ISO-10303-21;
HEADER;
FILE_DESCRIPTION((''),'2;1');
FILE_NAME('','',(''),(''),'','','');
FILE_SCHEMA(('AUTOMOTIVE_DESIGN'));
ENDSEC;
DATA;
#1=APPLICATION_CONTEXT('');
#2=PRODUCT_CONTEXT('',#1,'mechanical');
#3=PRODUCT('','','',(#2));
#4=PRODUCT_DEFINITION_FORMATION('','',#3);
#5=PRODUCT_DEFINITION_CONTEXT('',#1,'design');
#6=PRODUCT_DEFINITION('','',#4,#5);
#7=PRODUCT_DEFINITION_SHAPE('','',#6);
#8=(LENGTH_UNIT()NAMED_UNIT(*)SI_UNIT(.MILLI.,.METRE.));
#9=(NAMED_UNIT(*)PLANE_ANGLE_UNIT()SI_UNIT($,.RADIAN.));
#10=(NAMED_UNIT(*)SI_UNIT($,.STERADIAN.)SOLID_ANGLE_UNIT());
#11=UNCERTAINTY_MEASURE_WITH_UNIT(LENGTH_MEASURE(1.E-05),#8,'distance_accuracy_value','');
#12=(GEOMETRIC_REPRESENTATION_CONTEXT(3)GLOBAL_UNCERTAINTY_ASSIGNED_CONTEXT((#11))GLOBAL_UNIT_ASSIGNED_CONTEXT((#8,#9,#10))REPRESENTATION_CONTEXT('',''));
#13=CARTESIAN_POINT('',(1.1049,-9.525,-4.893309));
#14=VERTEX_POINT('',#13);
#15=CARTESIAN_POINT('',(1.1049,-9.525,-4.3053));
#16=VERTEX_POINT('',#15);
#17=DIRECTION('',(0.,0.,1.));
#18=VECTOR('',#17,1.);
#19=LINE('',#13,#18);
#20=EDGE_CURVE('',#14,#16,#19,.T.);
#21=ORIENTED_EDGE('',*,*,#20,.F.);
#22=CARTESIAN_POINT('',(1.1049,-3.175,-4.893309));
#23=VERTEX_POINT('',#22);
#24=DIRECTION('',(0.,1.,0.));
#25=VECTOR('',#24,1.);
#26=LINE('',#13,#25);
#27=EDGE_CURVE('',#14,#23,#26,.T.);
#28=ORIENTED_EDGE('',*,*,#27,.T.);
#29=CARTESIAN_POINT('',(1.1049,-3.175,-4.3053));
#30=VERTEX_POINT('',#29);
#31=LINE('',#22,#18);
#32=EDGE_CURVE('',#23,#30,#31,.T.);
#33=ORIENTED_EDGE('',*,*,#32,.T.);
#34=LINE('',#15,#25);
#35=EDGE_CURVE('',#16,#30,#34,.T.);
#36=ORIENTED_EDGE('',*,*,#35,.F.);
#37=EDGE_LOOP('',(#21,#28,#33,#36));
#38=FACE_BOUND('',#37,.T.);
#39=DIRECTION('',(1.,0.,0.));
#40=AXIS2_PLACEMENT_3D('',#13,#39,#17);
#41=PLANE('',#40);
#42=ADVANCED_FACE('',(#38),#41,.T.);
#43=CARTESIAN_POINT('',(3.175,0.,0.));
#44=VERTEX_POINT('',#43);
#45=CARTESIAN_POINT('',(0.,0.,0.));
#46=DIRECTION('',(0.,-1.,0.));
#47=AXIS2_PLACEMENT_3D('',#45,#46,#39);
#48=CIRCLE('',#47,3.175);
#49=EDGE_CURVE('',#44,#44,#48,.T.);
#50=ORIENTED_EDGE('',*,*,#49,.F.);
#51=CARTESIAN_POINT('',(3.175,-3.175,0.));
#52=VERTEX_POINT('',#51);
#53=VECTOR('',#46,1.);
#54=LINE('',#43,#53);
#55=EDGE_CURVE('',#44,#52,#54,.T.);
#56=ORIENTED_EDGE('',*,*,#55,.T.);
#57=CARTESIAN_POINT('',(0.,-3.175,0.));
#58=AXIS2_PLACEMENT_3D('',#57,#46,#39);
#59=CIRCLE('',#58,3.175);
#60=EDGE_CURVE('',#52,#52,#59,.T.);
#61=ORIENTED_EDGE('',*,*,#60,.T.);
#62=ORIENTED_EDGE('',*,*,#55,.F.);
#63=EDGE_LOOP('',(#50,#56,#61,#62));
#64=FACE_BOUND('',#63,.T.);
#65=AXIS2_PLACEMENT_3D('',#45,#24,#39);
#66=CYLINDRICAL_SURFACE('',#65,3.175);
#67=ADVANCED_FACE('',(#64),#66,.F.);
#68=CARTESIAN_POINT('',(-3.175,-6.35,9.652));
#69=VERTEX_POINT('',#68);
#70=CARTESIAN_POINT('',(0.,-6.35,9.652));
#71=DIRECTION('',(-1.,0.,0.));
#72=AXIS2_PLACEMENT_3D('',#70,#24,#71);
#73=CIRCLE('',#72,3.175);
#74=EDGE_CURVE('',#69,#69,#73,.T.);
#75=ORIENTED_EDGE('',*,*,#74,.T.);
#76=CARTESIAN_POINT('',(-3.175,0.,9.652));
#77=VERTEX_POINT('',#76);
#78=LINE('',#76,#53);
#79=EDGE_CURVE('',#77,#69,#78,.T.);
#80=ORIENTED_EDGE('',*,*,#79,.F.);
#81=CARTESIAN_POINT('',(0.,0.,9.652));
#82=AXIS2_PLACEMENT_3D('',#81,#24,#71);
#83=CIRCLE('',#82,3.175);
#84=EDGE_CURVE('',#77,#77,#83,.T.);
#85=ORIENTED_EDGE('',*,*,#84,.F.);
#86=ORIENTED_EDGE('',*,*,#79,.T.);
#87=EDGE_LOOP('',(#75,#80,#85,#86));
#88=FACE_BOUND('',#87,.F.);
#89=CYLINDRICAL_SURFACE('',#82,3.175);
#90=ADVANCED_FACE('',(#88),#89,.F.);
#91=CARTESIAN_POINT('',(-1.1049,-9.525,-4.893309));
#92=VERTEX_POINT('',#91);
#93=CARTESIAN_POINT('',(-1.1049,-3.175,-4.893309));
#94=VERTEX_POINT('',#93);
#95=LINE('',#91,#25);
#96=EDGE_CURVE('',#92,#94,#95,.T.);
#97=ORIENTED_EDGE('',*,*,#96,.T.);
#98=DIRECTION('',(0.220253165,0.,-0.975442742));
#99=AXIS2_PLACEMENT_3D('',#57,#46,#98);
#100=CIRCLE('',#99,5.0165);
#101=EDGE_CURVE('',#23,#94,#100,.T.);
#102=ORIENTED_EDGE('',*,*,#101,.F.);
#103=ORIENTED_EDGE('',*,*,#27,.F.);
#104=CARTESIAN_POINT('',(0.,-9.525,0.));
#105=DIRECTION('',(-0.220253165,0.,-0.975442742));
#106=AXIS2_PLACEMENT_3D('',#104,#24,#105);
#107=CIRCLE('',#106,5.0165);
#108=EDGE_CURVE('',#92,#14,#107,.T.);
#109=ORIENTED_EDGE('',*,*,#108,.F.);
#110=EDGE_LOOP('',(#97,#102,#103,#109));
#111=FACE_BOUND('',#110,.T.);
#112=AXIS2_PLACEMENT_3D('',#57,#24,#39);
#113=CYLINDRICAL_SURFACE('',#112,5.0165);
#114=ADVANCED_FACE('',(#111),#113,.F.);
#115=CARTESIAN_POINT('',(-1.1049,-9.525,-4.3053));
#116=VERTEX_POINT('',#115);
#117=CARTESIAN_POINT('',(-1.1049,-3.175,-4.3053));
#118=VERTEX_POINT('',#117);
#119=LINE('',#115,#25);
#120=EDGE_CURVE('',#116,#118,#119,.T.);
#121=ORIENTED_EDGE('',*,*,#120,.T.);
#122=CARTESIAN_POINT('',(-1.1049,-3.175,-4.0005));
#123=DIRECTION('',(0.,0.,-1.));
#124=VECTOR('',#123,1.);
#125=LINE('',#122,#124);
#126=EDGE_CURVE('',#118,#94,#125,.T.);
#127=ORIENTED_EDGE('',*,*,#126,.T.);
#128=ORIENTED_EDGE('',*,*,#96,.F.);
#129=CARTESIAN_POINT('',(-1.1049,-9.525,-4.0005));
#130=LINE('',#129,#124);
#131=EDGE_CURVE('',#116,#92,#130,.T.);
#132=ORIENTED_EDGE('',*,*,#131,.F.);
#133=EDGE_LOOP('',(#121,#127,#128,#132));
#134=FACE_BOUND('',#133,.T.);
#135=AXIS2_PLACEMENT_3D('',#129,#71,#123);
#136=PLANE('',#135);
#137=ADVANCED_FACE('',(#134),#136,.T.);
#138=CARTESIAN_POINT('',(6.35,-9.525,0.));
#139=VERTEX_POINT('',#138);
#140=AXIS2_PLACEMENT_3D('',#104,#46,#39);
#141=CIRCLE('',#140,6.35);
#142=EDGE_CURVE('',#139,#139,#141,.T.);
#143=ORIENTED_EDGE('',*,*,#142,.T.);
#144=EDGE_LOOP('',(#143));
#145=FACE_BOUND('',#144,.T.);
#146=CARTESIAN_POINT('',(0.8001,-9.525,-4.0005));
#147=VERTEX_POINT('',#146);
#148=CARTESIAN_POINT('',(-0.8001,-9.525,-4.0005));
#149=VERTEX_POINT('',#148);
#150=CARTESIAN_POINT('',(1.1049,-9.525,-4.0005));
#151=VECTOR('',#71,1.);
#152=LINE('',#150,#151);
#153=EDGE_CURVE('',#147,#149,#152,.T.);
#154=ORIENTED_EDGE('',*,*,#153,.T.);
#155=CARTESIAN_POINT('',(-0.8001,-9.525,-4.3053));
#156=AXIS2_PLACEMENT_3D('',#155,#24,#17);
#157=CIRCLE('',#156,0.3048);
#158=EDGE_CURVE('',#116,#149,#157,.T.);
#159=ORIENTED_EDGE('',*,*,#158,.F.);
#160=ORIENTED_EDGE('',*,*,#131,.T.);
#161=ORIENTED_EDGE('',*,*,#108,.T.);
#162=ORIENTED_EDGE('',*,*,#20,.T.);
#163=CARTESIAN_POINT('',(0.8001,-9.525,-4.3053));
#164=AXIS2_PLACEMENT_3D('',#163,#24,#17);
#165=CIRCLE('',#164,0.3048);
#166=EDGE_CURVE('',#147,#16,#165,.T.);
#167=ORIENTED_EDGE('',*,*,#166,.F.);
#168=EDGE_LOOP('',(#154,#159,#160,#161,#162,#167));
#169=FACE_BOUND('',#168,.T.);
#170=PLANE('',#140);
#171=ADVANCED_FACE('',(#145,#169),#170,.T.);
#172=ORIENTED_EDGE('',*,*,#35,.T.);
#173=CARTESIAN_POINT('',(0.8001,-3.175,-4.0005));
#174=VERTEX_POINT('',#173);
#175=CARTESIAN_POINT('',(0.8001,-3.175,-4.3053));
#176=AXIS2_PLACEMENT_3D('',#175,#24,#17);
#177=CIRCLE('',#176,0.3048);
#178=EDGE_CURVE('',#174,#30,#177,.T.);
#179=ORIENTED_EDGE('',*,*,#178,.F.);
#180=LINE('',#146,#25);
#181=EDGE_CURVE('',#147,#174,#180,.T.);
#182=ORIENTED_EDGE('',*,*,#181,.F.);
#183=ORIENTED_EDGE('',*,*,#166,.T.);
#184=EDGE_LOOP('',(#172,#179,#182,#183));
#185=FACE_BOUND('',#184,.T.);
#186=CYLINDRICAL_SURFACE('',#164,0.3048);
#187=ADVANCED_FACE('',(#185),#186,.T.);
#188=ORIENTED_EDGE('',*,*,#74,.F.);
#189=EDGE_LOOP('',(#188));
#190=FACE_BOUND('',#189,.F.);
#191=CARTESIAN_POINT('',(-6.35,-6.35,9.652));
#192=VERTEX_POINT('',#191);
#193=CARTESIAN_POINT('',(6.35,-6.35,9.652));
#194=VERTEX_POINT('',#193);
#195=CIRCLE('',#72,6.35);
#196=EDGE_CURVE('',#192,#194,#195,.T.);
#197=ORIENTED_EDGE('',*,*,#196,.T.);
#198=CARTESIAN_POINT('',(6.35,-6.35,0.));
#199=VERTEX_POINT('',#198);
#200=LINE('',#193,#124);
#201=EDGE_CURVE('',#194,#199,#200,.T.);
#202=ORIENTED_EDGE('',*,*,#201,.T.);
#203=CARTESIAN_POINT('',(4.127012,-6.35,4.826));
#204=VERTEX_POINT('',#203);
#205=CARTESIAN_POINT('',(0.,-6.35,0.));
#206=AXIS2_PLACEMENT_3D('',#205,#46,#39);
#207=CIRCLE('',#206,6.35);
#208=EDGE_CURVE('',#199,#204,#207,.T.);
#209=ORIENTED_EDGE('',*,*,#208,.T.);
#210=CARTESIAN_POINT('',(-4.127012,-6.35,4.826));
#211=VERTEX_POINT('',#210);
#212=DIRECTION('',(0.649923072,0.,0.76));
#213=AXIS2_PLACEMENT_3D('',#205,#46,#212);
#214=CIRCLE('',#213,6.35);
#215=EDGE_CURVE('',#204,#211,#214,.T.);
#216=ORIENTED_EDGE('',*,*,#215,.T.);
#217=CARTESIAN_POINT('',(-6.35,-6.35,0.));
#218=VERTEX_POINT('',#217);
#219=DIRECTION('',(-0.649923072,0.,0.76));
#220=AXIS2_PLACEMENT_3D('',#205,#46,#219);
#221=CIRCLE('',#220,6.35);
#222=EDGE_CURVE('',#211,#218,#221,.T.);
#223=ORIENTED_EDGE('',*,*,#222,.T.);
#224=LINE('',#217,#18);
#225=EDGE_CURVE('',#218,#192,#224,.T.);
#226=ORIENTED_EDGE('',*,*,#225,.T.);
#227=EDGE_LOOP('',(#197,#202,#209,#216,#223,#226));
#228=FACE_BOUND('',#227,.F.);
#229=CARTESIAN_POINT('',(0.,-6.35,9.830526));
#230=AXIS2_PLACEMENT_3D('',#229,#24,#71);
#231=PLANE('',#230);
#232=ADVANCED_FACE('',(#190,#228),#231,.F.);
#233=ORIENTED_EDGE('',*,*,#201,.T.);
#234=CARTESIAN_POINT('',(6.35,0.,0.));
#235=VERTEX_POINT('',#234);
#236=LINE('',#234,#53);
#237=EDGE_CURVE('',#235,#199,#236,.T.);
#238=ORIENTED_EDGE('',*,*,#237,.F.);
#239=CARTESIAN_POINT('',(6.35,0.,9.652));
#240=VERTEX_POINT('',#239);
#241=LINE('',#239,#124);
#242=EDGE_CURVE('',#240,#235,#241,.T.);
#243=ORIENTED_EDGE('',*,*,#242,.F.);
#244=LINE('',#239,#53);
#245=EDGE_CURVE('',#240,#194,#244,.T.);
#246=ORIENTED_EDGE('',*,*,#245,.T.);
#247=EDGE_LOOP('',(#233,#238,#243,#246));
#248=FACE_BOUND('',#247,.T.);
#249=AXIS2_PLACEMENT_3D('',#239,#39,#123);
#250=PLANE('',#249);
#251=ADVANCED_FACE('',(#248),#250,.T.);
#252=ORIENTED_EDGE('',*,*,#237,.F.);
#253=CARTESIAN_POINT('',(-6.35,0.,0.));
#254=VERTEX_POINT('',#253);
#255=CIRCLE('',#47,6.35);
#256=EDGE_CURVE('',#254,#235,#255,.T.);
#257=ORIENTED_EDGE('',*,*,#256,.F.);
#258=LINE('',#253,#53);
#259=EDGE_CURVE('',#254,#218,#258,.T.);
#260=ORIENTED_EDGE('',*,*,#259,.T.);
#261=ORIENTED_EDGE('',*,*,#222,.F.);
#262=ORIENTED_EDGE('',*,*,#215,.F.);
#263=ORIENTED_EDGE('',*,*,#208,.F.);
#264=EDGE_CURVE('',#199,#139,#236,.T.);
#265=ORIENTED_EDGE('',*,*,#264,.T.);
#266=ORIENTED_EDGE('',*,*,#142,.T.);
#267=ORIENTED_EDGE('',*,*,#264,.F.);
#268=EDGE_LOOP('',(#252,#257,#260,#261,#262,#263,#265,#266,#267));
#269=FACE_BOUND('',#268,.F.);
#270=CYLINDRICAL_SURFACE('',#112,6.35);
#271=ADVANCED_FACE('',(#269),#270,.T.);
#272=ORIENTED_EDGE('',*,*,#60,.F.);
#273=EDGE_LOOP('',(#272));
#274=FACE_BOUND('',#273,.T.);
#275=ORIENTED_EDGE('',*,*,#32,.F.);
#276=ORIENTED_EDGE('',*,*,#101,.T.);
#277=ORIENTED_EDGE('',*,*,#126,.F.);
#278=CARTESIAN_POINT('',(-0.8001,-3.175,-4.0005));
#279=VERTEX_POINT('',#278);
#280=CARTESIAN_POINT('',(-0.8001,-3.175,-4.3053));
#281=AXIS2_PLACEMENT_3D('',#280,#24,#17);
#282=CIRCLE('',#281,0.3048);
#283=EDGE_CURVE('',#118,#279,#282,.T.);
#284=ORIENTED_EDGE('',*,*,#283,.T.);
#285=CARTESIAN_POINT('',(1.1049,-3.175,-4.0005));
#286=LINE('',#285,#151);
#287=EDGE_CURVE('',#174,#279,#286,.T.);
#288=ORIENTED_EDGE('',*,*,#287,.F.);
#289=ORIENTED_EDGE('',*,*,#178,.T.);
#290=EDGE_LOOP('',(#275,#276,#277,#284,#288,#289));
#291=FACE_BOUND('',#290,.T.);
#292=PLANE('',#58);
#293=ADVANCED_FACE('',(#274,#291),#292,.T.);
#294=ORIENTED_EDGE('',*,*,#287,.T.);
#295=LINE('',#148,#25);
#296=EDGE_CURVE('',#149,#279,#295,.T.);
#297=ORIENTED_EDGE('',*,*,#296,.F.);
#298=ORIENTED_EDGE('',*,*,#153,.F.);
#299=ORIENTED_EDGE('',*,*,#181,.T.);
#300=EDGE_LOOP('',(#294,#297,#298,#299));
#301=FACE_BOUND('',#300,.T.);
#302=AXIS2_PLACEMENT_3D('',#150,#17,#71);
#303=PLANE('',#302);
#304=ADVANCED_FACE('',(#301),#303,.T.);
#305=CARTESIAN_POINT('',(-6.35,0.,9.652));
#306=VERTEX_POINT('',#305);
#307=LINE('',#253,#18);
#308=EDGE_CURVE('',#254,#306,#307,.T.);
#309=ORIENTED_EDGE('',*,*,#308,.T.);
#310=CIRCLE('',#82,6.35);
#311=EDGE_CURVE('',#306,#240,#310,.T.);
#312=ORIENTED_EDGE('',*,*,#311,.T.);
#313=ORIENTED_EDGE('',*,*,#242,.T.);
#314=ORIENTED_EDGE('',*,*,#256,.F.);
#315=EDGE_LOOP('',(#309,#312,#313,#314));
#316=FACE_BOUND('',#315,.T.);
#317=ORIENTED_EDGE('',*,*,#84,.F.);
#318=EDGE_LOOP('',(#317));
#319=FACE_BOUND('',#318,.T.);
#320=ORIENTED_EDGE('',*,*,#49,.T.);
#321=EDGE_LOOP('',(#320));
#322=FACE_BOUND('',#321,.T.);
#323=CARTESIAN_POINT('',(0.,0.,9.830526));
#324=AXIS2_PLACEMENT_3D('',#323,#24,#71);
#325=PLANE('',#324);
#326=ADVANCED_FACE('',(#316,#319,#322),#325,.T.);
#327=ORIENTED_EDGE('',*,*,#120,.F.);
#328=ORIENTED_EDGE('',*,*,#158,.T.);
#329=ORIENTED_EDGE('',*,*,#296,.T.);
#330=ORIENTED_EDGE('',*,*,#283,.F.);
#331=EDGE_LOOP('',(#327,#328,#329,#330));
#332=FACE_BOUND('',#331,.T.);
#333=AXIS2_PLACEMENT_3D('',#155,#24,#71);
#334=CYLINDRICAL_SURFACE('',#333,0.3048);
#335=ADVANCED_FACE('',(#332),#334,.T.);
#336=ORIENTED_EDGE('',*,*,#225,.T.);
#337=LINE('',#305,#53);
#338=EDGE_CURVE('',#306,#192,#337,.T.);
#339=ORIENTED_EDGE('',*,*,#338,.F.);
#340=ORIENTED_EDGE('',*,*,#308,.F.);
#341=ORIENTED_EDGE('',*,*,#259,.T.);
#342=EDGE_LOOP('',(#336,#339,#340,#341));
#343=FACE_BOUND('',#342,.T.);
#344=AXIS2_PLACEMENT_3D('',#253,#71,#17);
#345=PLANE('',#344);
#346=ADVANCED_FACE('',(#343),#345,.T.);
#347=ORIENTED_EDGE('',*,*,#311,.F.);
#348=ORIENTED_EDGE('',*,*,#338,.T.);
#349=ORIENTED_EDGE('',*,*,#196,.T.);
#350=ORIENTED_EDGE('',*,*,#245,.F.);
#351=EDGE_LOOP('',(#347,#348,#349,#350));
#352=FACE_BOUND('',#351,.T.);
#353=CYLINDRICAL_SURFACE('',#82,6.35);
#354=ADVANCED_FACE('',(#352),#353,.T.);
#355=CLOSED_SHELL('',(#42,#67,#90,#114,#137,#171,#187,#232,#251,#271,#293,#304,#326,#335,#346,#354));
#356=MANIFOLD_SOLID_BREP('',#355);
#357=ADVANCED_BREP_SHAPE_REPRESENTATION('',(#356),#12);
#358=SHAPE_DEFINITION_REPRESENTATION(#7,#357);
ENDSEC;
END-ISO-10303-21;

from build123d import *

# Parameters (mm, degrees)
F0_R     = 6.35
F0_R_2   = 3.175
F1_DEPTH = 3.175
F2_R     = 6.35
F2_R_2   = 5.0165
F3_DEPTH = 6.35
F4_R     = 3.175
F5_DEPTH = 6.35
F7_DEPTH = 6.35
F8_R     = 0.3048


# Not quite as in the source:
# - a feature names something its author has since deleted; it is built from what else it names


with BuildPart() as f1:
    # F0 (on Front) → F1 (new body)
    with BuildSketch(Plane.XZ):
        Circle(F0_R)
        Circle(F0_R_2, mode=Mode.SUBTRACT)
    extrude(amount=F1_DEPTH)

    # F2 (on face) → F3 (join)
    with BuildSketch(Plane.XZ.offset(3.175)):
        Circle(F2_R)
        Circle(F2_R_2, mode=Mode.SUBTRACT)
    extrude(amount=F3_DEPTH)

    # F4 (on face) → F5 (join)
    with BuildSketch(Plane(origin=(0, 0, 0), x_dir=(-1, 0, 0), z_dir=(0, 1, 0))):
        with BuildLine():
            ThreePointArc((-6.35, 9.652), (-5.7675394704, 6.9953125029), (-4.1270115096, 4.826))
            ThreePointArc((-4.1270115096, 4.826), (0, 6.35), (4.1270115096, 4.826))
            ThreePointArc((4.1270115096, 4.826), (5.7675394704, 6.9953125029), (6.35, 9.652))
            ThreePointArc((6.35, 9.652), (0, 16.002), (-6.35, 9.652))
        make_face()
        with Locations((0, 9.652)):
            Circle(F4_R, mode=Mode.SUBTRACT)
        with BuildLine():
            Line((-6.35, 9.652), (-6.35, 0))
            ThreePointArc((-6.35, 0), (-5.7675394704, 2.6566874971), (-4.1270115096, 4.826))
            ThreePointArc((-4.1270115096, 4.826), (-5.7675394704, 6.9953125029), (-6.35, 9.652))
        make_face()
        with BuildLine():
            ThreePointArc((4.1270115096, 4.826), (5.7675394704, 2.6566874971), (6.35, 0))
            Line((6.35, 0), (6.35, 9.652))
            ThreePointArc((6.35, 9.652), (5.7675394704, 6.9953125029), (4.1270115096, 4.826))
        make_face()
    extrude(amount=-F5_DEPTH)

    # F6 (on face) → F7 (join, through all)
    with BuildSketch(Plane.XZ.offset(9.525)):
        with BuildLine():
            Line((-1.1049, -4.0005), (-1.1049, -4.8933085167))
            ThreePointArc((-1.1049, -4.8933085167), (0, -5.0165), (1.1049, -4.8933085167))
            Line((1.1049, -4.8933085167), (1.1049, -4.0005))
            Line((1.1049, -4.0005), (-1.1049, -4.0005))
        make_face()
    extrude(amount=-F7_DEPTH)

    # F8
    f8_edges = [f1.edges().sort_by_distance(p)[0] for p in [
        (1.1049, -6.35, -4.0005),
        (-1.1049, -6.35, -4.0005),
    ]]
    fillet(f8_edges, radius=F8_R)


solid = f1.part
